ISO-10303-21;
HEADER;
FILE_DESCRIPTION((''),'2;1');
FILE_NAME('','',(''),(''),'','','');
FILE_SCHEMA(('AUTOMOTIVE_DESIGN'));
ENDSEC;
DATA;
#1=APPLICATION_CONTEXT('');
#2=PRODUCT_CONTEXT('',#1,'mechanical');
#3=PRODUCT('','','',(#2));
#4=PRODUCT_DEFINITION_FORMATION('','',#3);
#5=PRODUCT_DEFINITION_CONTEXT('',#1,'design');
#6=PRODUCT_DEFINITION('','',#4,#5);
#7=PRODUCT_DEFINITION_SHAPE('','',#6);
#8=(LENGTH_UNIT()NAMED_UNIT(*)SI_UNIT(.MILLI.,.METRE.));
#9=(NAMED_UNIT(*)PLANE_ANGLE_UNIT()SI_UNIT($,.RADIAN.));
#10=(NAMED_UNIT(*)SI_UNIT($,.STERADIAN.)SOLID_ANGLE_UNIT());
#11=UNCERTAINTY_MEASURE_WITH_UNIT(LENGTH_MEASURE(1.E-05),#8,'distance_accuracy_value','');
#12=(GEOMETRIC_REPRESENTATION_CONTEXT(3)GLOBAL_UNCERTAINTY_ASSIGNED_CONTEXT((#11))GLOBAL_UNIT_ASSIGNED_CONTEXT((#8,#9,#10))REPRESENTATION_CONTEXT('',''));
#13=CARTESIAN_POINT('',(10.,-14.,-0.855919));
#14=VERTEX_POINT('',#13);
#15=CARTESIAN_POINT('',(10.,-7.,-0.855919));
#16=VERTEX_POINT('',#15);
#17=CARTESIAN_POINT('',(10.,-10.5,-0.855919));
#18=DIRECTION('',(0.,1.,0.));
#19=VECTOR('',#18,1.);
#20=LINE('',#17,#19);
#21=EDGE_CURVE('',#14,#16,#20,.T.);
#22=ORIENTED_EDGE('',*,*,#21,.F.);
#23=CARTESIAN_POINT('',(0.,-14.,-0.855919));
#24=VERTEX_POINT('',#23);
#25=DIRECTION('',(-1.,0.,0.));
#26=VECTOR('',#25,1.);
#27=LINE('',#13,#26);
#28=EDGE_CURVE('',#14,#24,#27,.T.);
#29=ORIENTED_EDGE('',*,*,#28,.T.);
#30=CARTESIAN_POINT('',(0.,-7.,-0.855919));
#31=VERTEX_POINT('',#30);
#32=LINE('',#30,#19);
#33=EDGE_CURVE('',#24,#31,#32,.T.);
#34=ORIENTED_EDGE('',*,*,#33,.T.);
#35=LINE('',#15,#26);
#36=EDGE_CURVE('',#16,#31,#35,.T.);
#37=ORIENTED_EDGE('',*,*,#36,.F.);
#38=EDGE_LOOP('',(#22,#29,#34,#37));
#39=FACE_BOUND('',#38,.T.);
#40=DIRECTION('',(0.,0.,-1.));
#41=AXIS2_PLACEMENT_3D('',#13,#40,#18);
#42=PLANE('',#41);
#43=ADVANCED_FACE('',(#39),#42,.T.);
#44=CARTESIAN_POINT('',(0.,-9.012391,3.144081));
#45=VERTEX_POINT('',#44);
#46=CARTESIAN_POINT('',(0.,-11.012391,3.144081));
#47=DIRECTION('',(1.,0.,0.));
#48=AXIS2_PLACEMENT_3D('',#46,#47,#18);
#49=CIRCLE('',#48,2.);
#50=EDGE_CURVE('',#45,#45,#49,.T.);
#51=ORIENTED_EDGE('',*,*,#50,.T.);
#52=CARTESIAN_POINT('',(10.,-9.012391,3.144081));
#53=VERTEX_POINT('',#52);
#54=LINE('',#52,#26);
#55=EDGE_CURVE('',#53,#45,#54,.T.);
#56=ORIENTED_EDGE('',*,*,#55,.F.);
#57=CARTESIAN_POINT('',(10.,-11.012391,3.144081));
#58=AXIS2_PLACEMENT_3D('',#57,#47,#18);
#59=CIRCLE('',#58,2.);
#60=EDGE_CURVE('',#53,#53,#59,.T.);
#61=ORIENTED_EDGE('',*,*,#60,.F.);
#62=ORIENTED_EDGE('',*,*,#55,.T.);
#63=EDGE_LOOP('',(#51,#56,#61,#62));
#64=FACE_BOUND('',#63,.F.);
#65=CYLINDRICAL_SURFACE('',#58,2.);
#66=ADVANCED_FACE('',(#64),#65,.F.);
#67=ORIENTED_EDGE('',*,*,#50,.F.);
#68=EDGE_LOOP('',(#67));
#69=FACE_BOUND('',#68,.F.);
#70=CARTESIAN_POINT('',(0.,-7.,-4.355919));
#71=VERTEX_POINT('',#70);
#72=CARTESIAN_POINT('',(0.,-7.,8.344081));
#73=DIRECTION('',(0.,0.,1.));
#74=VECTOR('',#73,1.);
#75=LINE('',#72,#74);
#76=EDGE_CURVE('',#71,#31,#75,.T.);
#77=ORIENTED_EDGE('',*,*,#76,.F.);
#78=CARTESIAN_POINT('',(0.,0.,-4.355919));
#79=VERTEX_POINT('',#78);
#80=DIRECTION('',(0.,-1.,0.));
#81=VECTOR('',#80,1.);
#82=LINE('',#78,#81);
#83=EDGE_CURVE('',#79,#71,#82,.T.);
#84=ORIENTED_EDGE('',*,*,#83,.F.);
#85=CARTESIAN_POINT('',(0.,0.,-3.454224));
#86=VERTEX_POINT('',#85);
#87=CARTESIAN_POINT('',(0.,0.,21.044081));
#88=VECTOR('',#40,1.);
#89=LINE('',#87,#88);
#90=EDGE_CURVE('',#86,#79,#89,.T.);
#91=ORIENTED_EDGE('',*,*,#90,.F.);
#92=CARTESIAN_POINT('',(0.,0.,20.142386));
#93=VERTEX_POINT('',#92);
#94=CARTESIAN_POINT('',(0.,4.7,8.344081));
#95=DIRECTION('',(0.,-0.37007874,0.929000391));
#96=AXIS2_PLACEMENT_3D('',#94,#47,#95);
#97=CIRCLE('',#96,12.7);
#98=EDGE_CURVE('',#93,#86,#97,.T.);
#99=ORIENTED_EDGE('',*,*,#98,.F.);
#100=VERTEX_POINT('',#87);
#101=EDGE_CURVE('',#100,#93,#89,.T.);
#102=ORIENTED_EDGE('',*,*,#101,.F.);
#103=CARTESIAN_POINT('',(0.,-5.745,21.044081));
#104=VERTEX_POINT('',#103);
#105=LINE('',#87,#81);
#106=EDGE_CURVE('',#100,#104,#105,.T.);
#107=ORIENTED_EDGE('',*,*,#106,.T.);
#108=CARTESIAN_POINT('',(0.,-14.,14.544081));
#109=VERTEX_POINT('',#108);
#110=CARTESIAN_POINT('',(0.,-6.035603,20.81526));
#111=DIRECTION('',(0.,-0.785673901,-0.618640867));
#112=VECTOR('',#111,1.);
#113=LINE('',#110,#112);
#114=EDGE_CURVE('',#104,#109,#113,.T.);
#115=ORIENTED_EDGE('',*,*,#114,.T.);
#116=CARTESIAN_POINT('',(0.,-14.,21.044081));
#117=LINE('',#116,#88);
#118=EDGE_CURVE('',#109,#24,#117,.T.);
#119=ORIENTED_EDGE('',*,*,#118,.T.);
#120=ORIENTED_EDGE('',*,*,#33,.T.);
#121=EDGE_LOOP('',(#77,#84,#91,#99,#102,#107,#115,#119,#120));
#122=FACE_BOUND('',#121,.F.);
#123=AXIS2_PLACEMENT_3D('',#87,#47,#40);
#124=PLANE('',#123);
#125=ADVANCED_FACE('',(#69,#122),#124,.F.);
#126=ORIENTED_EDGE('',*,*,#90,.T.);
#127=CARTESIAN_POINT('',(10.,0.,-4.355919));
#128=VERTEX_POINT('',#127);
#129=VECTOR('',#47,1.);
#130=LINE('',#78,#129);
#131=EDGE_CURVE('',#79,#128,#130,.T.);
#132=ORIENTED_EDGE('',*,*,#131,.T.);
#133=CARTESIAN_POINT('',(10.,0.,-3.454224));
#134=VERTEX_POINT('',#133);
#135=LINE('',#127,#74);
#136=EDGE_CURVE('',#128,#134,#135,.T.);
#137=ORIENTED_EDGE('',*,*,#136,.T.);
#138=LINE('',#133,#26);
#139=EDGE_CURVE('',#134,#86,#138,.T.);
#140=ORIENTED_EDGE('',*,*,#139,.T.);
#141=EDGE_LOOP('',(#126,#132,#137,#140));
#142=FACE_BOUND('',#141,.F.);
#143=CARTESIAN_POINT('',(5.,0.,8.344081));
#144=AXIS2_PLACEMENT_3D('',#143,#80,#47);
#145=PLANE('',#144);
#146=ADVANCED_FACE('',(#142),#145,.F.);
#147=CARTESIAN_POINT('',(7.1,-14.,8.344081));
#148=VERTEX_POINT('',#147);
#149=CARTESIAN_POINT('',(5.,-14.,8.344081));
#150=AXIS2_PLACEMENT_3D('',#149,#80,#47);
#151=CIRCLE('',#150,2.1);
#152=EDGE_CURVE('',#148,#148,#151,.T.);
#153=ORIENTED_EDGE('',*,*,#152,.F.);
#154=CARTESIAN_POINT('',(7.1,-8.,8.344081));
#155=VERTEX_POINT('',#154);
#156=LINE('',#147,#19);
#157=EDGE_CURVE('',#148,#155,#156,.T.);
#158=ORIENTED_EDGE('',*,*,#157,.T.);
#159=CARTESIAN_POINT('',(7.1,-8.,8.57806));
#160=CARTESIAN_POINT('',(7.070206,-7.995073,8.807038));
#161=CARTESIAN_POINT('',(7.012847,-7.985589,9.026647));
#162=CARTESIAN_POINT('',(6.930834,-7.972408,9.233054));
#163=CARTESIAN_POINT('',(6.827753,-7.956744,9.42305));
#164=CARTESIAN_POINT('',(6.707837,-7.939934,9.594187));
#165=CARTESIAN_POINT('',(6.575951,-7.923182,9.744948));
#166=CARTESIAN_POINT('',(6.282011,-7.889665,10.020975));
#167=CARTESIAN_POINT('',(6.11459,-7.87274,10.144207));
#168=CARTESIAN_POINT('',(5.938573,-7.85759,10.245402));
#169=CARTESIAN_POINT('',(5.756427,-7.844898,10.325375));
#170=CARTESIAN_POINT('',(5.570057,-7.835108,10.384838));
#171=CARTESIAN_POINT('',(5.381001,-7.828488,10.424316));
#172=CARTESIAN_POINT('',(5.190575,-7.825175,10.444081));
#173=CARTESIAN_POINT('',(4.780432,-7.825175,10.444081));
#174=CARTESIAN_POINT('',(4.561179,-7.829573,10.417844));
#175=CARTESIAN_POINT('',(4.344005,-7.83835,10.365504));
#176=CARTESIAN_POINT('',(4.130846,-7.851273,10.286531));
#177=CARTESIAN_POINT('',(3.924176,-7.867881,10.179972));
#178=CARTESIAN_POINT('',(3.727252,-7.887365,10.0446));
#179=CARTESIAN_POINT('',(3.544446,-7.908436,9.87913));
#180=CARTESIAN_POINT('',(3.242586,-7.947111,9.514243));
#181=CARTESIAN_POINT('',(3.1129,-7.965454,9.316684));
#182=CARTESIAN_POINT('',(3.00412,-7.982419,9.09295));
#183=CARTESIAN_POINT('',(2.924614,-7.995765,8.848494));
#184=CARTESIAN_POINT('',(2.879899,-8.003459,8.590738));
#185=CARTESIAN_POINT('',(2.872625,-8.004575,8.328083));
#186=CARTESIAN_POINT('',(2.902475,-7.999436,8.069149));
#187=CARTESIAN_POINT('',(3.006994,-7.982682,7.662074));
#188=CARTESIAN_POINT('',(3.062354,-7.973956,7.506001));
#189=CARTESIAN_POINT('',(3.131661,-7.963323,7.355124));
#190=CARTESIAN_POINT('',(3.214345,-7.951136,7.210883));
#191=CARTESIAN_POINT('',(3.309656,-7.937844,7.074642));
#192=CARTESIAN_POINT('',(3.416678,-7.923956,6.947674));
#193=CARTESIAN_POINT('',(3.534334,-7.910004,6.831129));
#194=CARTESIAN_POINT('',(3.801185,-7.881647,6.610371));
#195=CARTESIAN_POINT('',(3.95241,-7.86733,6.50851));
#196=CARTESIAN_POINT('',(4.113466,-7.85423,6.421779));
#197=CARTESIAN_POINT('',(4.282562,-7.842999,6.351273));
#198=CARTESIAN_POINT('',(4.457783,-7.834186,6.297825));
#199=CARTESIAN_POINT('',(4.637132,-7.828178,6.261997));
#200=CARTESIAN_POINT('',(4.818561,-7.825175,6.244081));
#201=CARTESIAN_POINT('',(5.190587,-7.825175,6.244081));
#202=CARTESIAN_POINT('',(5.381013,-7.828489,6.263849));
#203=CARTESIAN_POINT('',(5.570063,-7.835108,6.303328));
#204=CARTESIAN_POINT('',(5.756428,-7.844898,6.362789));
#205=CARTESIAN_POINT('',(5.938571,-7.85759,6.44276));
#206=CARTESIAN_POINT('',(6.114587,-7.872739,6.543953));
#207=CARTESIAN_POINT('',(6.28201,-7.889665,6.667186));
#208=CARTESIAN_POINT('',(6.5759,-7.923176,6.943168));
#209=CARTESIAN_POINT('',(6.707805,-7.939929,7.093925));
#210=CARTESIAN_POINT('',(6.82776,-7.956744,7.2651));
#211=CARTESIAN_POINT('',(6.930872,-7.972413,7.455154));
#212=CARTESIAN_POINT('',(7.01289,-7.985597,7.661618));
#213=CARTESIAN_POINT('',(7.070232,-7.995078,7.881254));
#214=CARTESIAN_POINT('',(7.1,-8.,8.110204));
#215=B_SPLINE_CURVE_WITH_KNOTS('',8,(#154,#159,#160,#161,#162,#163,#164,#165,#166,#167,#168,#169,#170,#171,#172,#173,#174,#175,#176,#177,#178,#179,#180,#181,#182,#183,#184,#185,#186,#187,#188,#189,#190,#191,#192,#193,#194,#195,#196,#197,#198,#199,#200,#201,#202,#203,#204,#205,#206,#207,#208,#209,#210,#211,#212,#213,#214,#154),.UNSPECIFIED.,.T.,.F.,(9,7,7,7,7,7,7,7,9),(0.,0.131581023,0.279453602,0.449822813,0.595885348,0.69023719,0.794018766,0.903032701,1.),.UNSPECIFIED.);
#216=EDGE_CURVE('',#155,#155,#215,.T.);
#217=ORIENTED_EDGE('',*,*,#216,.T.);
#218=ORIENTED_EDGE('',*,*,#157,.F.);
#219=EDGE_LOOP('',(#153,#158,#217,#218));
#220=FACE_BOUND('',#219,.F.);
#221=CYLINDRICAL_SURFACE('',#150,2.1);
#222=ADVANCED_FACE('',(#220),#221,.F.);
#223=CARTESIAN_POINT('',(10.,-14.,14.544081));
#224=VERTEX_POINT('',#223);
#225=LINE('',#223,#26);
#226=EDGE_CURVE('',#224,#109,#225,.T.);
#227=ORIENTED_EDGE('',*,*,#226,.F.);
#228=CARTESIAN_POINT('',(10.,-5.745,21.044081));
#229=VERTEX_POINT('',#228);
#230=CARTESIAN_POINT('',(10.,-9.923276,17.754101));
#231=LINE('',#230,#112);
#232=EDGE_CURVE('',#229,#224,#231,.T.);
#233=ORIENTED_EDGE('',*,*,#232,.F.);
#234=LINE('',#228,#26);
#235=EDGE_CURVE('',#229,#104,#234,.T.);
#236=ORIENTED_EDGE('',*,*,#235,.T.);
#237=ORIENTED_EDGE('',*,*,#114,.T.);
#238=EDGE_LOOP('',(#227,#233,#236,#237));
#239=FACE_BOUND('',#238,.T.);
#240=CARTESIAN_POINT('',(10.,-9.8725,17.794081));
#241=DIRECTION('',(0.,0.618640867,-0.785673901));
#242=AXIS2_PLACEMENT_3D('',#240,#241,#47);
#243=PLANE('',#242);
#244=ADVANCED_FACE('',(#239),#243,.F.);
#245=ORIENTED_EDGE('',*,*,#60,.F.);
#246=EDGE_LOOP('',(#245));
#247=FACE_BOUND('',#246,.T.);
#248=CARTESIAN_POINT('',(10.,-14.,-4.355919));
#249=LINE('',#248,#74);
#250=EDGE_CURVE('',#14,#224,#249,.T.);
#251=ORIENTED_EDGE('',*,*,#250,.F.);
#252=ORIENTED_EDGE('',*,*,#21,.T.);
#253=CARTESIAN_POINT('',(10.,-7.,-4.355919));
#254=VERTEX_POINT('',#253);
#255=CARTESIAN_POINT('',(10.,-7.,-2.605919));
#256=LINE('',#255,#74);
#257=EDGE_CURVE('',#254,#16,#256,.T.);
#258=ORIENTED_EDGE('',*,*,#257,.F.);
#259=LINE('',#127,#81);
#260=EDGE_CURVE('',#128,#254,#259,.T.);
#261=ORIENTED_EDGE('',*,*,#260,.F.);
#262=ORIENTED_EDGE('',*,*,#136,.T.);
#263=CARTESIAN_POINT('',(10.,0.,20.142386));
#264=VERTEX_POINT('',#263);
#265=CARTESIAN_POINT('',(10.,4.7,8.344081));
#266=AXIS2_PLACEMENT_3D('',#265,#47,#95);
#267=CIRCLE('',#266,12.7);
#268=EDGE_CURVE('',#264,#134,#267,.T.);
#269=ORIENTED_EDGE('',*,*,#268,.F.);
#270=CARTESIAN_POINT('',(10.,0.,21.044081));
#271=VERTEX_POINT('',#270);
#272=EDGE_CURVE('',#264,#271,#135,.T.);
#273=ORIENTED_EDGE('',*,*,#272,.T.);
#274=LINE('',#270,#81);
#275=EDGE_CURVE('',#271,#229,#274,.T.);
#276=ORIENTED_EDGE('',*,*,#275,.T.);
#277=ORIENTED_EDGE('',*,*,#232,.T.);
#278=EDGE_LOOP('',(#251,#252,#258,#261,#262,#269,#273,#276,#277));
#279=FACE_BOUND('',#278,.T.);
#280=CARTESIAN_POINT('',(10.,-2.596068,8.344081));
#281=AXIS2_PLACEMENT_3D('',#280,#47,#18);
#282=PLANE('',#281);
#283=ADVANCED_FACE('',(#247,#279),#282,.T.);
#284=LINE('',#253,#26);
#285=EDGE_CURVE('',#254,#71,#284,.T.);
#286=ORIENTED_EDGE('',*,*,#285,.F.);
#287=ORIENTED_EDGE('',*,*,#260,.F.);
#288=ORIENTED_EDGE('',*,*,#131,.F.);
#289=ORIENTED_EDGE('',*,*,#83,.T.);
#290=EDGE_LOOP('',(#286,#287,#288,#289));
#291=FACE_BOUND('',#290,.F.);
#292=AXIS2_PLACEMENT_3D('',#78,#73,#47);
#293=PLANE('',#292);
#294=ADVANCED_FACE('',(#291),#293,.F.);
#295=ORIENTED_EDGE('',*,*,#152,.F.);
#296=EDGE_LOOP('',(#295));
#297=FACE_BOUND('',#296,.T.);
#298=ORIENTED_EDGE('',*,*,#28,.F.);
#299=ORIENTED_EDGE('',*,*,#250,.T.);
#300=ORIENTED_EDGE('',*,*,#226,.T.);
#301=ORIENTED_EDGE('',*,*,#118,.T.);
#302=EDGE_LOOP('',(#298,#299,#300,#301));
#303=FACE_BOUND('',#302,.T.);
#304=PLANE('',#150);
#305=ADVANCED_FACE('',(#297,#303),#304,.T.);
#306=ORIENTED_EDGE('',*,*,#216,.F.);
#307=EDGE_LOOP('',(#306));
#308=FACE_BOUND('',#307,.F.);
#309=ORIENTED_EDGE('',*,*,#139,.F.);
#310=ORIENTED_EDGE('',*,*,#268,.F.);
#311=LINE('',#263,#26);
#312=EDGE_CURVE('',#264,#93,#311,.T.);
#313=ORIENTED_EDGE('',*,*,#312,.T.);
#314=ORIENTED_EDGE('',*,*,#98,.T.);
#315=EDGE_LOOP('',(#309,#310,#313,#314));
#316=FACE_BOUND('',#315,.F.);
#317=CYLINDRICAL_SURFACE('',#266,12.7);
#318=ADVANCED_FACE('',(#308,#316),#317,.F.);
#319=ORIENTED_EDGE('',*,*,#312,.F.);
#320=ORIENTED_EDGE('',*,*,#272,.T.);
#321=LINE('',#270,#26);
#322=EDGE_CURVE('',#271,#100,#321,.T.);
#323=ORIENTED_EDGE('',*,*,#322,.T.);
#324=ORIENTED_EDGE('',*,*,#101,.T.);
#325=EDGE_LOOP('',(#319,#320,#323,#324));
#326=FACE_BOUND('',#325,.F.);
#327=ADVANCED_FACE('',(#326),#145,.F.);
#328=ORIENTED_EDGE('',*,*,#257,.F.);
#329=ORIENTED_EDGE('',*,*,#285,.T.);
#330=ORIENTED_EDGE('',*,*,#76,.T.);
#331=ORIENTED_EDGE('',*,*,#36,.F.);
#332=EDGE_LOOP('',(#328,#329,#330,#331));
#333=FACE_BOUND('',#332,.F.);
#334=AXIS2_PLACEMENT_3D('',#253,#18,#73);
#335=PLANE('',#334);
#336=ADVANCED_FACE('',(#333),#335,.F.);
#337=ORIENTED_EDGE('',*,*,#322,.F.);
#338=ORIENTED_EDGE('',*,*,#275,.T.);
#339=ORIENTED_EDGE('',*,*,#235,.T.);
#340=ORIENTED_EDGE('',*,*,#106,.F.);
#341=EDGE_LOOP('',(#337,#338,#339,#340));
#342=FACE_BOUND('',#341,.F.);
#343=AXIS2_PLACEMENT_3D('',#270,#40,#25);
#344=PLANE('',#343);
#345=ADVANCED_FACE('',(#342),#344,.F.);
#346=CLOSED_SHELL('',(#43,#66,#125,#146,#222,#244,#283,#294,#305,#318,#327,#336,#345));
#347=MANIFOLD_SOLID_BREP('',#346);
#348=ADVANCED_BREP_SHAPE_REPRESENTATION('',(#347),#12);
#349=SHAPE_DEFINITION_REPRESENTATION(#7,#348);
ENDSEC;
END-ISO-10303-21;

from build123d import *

# Parameters (mm, degrees)
F1_DEPTH = 14
F3_DEPTH = 11
F4_R     = 2.1
F5_DEPTH = 14.001
F6_SIZE2 = 6.5
F6_SIZE  = 8.255
F7_DEPTH = 25.4
F2_W     = 7
F2_H     = 3.5
F8_DEPTH = 10.0010001
F2_R     = 2
F9_DEPTH = 25


# Not quite as in the source:
# - a feature names something its author has since deleted; it is built from what else it names


with BuildPart() as f1:
    # F0 (on Front) → F1 (new body)
    with BuildSketch(Plane.XZ):
        Polygon((10, 21.0440813839), (0, 21.0440813839), (0, 0), (0, -4.3559186161), (10, -4.3559186161), (10, 0), align=None)
    extrude(amount=F1_DEPTH)

    # F2 (on face) → F3 (join)
    with BuildSketch(Plane.YZ.offset(10)):
        with BuildLine():
            Line((0, -3.4542235791), (0, 20.1423863469))
            ThreePointArc((0, 20.1423863469), (-8, 8.3440813839), (0, -3.4542235791))
        make_face()
    extrude(amount=-F3_DEPTH)

    # F4 (on face) → F5 (cut, through all)
    with BuildSketch(Plane.XZ.offset(14)):
        with Locations((5, 8.3440813839)):
            Circle(F4_R)
    extrude(amount=-F5_DEPTH, mode=Mode.SUBTRACT)

    # F6
    f6_edges = [f1.edges().sort_by_distance(p)[0] for p in [
        (5, -14, 21.044081),
    ]]
    f6_side = f1.faces().sort_by_distance((5, -7, 21.044081))[0]
    chamfer(f6_edges, length=F6_SIZE, length2=F6_SIZE2, reference=f6_side)

    # F2 (on face) → F7 (cut)
    with BuildSketch(Plane.YZ.offset(10)):
        with BuildLine():
            Line((0, -3.4542235791), (0, 20.1423863469))
            ThreePointArc((0, 20.1423863469), (-8, 8.3440813839), (0, -3.4542235791))
        make_face()
    extrude(amount=-F7_DEPTH, mode=Mode.SUBTRACT)

    # F2 (on face) → F8 (cut, through all)
    with BuildSketch(Plane.YZ.offset(10)):
        with Locations((-10.5, -2.6059186161)):
            Rectangle(F2_W, F2_H)
    extrude(amount=-F8_DEPTH, mode=Mode.SUBTRACT)

    # F2 (on face) → F9 (cut)
    with BuildSketch(Plane.YZ.offset(10)):
        with BuildLine():
            Line((4.7, 21.0440813839), (1.525, 21.0440813839))
            Line((1.525, 21.0440813839), (1.525, 20.6408035082))
            ThreePointArc((1.525, 20.6408035082), (3.0997454855, 20.9428585265), (4.7, 21.0440813839))
        make_face()
        with BuildLine():
            Line((7.875, 21.0440813839), (4.7, 21.0440813839))
            ThreePointArc((4.7, 21.0440813839), (3.0997454855, 20.9428585265), (1.525, 20.6408035082))
            Line((1.525, 20.6408035082), (1.525, -3.9526407403))
            ThreePointArc((1.525, -3.9526407403), (3.0997454855, -4.2546957586), (4.7, -4.3559186161))
            Line((4.7, -4.3559186161), (7.875, -4.3559186161))
            Line((7.875, -4.3559186161), (7.875, 21.0440813839))
        make_face()
        with BuildLine():
            Line((1.525, -3.9526407403), (1.525, 20.6408035082))
            ThreePointArc((1.525, 20.6408035082), (0.7546215433, 20.4157005311), (0, 20.1423863469))
            Line((0, 20.1423863469), (0, -3.4542235791))
            ThreePointArc((0, -3.4542235791), (0.7546215433, -3.7275377632), (1.525, -3.9526407403))
        make_face()
        with BuildLine():
            ThreePointArc((4.7, -4.3559186161), (3.0997454855, -4.2546957586), (1.525, -3.9526407403))
            Line((1.525, -3.9526407403), (1.525, -4.3559186161))
            Line((1.525, -4.3559186161), (2.607938957, -4.3559186161))
            Line((2.607938957, -4.3559186161), (4.7, -4.3559186161))
        make_face()
        with BuildLine():
            Line((0, -3.4542235791), (0, 20.1423863469))
            ThreePointArc((0, 20.1423863469), (-8, 8.3440813839), (0, -3.4542235791))
        make_face()
        with Locations((-11.0123908797, 3.1440813839)):
            Circle(F2_R)
    extrude(amount=-F9_DEPTH, mode=Mode.SUBTRACT)


solid = f1.part
